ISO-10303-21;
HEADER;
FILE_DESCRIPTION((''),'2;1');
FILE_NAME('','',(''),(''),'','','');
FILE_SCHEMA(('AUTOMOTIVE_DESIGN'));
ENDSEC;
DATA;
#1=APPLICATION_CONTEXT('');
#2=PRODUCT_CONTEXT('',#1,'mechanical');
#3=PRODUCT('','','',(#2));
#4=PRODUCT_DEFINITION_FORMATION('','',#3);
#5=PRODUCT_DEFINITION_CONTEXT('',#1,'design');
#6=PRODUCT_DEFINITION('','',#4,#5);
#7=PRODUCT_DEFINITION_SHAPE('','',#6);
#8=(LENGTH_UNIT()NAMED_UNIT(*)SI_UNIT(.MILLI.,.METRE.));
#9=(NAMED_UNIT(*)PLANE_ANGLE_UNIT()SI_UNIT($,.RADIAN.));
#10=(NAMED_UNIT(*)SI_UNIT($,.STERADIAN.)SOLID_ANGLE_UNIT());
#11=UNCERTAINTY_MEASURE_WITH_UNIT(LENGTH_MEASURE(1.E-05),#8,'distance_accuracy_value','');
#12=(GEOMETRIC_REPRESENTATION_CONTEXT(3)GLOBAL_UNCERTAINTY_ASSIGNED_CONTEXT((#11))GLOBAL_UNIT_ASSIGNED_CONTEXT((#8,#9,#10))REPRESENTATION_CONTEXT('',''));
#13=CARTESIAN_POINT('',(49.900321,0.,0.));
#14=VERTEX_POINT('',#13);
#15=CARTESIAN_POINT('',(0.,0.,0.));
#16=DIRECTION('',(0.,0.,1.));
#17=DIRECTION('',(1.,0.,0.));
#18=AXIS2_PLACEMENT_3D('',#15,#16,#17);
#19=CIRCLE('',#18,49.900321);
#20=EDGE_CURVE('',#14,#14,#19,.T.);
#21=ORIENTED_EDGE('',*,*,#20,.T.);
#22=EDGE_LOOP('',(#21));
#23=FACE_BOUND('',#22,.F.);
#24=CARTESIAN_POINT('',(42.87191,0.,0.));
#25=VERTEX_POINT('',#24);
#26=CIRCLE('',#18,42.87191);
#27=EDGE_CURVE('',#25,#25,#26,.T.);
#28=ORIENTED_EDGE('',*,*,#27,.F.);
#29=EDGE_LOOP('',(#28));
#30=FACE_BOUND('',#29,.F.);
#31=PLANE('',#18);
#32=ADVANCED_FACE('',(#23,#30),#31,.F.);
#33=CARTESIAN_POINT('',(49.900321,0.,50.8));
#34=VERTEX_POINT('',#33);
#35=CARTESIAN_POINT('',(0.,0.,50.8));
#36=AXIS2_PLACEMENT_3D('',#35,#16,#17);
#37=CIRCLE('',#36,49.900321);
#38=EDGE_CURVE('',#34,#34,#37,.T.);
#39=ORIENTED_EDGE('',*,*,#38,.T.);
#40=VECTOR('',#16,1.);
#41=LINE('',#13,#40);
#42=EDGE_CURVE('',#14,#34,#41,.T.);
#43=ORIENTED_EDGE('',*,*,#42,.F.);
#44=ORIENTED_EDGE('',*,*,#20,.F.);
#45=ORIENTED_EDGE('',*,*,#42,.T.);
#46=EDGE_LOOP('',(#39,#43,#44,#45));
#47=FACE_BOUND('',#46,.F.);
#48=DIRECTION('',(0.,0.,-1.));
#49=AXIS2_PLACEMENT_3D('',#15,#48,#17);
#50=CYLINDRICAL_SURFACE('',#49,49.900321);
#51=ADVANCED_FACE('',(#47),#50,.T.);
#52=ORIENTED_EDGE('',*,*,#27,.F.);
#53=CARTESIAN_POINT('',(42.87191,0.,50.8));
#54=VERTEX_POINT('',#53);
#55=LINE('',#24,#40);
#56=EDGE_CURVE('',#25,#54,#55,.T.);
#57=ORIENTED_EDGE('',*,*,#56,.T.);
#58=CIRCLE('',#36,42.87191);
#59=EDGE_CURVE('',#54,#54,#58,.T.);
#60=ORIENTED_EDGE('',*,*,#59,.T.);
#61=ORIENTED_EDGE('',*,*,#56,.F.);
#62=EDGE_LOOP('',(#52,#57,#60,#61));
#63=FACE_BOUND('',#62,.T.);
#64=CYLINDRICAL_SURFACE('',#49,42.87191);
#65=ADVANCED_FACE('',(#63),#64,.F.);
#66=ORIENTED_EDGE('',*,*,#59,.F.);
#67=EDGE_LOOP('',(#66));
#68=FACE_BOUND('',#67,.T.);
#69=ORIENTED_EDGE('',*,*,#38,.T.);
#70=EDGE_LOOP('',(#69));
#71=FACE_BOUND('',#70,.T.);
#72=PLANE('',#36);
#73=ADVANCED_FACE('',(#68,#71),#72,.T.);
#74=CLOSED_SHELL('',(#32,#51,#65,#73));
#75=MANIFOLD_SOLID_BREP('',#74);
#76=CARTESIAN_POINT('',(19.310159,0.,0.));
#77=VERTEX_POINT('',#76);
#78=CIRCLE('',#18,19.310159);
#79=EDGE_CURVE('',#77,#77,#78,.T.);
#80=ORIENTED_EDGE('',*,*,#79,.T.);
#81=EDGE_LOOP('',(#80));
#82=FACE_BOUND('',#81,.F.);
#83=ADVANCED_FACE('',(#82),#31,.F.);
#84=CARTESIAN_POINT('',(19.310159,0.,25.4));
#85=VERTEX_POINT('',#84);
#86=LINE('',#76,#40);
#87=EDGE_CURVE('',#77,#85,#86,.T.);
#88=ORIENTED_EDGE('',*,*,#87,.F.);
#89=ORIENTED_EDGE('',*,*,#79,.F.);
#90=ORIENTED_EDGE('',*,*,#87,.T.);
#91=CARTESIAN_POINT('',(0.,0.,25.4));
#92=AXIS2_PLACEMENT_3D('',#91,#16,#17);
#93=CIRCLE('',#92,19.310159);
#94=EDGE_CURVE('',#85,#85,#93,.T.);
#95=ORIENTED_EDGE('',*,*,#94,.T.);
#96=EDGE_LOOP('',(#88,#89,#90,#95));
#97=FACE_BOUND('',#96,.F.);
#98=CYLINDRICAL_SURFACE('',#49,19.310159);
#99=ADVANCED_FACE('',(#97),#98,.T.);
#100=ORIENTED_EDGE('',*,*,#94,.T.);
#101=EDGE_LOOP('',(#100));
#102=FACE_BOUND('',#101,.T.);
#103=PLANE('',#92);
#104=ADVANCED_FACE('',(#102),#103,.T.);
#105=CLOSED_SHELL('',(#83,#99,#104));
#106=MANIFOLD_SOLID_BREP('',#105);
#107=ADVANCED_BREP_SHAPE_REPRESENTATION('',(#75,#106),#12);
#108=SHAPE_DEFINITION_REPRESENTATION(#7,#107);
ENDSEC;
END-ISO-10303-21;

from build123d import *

# Parameters (mm, degrees)
F0_R     = 49.900321063
F0_R_2   = 42.8719097742
F1_DEPTH = 50.8
F2_R     = 19.3101591149
F3_DEPTH = 25.4


# Not quite as in the source:
# - a feature names something its author has since deleted; it is built from what else it names


with BuildPart() as f1:
    # F0 (on Top) → F1 (new body)
    with BuildSketch(Plane.XY):
        Circle(F0_R)
        Circle(F0_R_2, mode=Mode.SUBTRACT)
    extrude(amount=F1_DEPTH)


with BuildPart() as f3:
    # F2 (on Top) → F3 (new body)
    with BuildSketch(Plane.XY):
        Circle(F2_R)
    extrude(amount=F3_DEPTH)


solid = Compound([f1.part, f3.part])
